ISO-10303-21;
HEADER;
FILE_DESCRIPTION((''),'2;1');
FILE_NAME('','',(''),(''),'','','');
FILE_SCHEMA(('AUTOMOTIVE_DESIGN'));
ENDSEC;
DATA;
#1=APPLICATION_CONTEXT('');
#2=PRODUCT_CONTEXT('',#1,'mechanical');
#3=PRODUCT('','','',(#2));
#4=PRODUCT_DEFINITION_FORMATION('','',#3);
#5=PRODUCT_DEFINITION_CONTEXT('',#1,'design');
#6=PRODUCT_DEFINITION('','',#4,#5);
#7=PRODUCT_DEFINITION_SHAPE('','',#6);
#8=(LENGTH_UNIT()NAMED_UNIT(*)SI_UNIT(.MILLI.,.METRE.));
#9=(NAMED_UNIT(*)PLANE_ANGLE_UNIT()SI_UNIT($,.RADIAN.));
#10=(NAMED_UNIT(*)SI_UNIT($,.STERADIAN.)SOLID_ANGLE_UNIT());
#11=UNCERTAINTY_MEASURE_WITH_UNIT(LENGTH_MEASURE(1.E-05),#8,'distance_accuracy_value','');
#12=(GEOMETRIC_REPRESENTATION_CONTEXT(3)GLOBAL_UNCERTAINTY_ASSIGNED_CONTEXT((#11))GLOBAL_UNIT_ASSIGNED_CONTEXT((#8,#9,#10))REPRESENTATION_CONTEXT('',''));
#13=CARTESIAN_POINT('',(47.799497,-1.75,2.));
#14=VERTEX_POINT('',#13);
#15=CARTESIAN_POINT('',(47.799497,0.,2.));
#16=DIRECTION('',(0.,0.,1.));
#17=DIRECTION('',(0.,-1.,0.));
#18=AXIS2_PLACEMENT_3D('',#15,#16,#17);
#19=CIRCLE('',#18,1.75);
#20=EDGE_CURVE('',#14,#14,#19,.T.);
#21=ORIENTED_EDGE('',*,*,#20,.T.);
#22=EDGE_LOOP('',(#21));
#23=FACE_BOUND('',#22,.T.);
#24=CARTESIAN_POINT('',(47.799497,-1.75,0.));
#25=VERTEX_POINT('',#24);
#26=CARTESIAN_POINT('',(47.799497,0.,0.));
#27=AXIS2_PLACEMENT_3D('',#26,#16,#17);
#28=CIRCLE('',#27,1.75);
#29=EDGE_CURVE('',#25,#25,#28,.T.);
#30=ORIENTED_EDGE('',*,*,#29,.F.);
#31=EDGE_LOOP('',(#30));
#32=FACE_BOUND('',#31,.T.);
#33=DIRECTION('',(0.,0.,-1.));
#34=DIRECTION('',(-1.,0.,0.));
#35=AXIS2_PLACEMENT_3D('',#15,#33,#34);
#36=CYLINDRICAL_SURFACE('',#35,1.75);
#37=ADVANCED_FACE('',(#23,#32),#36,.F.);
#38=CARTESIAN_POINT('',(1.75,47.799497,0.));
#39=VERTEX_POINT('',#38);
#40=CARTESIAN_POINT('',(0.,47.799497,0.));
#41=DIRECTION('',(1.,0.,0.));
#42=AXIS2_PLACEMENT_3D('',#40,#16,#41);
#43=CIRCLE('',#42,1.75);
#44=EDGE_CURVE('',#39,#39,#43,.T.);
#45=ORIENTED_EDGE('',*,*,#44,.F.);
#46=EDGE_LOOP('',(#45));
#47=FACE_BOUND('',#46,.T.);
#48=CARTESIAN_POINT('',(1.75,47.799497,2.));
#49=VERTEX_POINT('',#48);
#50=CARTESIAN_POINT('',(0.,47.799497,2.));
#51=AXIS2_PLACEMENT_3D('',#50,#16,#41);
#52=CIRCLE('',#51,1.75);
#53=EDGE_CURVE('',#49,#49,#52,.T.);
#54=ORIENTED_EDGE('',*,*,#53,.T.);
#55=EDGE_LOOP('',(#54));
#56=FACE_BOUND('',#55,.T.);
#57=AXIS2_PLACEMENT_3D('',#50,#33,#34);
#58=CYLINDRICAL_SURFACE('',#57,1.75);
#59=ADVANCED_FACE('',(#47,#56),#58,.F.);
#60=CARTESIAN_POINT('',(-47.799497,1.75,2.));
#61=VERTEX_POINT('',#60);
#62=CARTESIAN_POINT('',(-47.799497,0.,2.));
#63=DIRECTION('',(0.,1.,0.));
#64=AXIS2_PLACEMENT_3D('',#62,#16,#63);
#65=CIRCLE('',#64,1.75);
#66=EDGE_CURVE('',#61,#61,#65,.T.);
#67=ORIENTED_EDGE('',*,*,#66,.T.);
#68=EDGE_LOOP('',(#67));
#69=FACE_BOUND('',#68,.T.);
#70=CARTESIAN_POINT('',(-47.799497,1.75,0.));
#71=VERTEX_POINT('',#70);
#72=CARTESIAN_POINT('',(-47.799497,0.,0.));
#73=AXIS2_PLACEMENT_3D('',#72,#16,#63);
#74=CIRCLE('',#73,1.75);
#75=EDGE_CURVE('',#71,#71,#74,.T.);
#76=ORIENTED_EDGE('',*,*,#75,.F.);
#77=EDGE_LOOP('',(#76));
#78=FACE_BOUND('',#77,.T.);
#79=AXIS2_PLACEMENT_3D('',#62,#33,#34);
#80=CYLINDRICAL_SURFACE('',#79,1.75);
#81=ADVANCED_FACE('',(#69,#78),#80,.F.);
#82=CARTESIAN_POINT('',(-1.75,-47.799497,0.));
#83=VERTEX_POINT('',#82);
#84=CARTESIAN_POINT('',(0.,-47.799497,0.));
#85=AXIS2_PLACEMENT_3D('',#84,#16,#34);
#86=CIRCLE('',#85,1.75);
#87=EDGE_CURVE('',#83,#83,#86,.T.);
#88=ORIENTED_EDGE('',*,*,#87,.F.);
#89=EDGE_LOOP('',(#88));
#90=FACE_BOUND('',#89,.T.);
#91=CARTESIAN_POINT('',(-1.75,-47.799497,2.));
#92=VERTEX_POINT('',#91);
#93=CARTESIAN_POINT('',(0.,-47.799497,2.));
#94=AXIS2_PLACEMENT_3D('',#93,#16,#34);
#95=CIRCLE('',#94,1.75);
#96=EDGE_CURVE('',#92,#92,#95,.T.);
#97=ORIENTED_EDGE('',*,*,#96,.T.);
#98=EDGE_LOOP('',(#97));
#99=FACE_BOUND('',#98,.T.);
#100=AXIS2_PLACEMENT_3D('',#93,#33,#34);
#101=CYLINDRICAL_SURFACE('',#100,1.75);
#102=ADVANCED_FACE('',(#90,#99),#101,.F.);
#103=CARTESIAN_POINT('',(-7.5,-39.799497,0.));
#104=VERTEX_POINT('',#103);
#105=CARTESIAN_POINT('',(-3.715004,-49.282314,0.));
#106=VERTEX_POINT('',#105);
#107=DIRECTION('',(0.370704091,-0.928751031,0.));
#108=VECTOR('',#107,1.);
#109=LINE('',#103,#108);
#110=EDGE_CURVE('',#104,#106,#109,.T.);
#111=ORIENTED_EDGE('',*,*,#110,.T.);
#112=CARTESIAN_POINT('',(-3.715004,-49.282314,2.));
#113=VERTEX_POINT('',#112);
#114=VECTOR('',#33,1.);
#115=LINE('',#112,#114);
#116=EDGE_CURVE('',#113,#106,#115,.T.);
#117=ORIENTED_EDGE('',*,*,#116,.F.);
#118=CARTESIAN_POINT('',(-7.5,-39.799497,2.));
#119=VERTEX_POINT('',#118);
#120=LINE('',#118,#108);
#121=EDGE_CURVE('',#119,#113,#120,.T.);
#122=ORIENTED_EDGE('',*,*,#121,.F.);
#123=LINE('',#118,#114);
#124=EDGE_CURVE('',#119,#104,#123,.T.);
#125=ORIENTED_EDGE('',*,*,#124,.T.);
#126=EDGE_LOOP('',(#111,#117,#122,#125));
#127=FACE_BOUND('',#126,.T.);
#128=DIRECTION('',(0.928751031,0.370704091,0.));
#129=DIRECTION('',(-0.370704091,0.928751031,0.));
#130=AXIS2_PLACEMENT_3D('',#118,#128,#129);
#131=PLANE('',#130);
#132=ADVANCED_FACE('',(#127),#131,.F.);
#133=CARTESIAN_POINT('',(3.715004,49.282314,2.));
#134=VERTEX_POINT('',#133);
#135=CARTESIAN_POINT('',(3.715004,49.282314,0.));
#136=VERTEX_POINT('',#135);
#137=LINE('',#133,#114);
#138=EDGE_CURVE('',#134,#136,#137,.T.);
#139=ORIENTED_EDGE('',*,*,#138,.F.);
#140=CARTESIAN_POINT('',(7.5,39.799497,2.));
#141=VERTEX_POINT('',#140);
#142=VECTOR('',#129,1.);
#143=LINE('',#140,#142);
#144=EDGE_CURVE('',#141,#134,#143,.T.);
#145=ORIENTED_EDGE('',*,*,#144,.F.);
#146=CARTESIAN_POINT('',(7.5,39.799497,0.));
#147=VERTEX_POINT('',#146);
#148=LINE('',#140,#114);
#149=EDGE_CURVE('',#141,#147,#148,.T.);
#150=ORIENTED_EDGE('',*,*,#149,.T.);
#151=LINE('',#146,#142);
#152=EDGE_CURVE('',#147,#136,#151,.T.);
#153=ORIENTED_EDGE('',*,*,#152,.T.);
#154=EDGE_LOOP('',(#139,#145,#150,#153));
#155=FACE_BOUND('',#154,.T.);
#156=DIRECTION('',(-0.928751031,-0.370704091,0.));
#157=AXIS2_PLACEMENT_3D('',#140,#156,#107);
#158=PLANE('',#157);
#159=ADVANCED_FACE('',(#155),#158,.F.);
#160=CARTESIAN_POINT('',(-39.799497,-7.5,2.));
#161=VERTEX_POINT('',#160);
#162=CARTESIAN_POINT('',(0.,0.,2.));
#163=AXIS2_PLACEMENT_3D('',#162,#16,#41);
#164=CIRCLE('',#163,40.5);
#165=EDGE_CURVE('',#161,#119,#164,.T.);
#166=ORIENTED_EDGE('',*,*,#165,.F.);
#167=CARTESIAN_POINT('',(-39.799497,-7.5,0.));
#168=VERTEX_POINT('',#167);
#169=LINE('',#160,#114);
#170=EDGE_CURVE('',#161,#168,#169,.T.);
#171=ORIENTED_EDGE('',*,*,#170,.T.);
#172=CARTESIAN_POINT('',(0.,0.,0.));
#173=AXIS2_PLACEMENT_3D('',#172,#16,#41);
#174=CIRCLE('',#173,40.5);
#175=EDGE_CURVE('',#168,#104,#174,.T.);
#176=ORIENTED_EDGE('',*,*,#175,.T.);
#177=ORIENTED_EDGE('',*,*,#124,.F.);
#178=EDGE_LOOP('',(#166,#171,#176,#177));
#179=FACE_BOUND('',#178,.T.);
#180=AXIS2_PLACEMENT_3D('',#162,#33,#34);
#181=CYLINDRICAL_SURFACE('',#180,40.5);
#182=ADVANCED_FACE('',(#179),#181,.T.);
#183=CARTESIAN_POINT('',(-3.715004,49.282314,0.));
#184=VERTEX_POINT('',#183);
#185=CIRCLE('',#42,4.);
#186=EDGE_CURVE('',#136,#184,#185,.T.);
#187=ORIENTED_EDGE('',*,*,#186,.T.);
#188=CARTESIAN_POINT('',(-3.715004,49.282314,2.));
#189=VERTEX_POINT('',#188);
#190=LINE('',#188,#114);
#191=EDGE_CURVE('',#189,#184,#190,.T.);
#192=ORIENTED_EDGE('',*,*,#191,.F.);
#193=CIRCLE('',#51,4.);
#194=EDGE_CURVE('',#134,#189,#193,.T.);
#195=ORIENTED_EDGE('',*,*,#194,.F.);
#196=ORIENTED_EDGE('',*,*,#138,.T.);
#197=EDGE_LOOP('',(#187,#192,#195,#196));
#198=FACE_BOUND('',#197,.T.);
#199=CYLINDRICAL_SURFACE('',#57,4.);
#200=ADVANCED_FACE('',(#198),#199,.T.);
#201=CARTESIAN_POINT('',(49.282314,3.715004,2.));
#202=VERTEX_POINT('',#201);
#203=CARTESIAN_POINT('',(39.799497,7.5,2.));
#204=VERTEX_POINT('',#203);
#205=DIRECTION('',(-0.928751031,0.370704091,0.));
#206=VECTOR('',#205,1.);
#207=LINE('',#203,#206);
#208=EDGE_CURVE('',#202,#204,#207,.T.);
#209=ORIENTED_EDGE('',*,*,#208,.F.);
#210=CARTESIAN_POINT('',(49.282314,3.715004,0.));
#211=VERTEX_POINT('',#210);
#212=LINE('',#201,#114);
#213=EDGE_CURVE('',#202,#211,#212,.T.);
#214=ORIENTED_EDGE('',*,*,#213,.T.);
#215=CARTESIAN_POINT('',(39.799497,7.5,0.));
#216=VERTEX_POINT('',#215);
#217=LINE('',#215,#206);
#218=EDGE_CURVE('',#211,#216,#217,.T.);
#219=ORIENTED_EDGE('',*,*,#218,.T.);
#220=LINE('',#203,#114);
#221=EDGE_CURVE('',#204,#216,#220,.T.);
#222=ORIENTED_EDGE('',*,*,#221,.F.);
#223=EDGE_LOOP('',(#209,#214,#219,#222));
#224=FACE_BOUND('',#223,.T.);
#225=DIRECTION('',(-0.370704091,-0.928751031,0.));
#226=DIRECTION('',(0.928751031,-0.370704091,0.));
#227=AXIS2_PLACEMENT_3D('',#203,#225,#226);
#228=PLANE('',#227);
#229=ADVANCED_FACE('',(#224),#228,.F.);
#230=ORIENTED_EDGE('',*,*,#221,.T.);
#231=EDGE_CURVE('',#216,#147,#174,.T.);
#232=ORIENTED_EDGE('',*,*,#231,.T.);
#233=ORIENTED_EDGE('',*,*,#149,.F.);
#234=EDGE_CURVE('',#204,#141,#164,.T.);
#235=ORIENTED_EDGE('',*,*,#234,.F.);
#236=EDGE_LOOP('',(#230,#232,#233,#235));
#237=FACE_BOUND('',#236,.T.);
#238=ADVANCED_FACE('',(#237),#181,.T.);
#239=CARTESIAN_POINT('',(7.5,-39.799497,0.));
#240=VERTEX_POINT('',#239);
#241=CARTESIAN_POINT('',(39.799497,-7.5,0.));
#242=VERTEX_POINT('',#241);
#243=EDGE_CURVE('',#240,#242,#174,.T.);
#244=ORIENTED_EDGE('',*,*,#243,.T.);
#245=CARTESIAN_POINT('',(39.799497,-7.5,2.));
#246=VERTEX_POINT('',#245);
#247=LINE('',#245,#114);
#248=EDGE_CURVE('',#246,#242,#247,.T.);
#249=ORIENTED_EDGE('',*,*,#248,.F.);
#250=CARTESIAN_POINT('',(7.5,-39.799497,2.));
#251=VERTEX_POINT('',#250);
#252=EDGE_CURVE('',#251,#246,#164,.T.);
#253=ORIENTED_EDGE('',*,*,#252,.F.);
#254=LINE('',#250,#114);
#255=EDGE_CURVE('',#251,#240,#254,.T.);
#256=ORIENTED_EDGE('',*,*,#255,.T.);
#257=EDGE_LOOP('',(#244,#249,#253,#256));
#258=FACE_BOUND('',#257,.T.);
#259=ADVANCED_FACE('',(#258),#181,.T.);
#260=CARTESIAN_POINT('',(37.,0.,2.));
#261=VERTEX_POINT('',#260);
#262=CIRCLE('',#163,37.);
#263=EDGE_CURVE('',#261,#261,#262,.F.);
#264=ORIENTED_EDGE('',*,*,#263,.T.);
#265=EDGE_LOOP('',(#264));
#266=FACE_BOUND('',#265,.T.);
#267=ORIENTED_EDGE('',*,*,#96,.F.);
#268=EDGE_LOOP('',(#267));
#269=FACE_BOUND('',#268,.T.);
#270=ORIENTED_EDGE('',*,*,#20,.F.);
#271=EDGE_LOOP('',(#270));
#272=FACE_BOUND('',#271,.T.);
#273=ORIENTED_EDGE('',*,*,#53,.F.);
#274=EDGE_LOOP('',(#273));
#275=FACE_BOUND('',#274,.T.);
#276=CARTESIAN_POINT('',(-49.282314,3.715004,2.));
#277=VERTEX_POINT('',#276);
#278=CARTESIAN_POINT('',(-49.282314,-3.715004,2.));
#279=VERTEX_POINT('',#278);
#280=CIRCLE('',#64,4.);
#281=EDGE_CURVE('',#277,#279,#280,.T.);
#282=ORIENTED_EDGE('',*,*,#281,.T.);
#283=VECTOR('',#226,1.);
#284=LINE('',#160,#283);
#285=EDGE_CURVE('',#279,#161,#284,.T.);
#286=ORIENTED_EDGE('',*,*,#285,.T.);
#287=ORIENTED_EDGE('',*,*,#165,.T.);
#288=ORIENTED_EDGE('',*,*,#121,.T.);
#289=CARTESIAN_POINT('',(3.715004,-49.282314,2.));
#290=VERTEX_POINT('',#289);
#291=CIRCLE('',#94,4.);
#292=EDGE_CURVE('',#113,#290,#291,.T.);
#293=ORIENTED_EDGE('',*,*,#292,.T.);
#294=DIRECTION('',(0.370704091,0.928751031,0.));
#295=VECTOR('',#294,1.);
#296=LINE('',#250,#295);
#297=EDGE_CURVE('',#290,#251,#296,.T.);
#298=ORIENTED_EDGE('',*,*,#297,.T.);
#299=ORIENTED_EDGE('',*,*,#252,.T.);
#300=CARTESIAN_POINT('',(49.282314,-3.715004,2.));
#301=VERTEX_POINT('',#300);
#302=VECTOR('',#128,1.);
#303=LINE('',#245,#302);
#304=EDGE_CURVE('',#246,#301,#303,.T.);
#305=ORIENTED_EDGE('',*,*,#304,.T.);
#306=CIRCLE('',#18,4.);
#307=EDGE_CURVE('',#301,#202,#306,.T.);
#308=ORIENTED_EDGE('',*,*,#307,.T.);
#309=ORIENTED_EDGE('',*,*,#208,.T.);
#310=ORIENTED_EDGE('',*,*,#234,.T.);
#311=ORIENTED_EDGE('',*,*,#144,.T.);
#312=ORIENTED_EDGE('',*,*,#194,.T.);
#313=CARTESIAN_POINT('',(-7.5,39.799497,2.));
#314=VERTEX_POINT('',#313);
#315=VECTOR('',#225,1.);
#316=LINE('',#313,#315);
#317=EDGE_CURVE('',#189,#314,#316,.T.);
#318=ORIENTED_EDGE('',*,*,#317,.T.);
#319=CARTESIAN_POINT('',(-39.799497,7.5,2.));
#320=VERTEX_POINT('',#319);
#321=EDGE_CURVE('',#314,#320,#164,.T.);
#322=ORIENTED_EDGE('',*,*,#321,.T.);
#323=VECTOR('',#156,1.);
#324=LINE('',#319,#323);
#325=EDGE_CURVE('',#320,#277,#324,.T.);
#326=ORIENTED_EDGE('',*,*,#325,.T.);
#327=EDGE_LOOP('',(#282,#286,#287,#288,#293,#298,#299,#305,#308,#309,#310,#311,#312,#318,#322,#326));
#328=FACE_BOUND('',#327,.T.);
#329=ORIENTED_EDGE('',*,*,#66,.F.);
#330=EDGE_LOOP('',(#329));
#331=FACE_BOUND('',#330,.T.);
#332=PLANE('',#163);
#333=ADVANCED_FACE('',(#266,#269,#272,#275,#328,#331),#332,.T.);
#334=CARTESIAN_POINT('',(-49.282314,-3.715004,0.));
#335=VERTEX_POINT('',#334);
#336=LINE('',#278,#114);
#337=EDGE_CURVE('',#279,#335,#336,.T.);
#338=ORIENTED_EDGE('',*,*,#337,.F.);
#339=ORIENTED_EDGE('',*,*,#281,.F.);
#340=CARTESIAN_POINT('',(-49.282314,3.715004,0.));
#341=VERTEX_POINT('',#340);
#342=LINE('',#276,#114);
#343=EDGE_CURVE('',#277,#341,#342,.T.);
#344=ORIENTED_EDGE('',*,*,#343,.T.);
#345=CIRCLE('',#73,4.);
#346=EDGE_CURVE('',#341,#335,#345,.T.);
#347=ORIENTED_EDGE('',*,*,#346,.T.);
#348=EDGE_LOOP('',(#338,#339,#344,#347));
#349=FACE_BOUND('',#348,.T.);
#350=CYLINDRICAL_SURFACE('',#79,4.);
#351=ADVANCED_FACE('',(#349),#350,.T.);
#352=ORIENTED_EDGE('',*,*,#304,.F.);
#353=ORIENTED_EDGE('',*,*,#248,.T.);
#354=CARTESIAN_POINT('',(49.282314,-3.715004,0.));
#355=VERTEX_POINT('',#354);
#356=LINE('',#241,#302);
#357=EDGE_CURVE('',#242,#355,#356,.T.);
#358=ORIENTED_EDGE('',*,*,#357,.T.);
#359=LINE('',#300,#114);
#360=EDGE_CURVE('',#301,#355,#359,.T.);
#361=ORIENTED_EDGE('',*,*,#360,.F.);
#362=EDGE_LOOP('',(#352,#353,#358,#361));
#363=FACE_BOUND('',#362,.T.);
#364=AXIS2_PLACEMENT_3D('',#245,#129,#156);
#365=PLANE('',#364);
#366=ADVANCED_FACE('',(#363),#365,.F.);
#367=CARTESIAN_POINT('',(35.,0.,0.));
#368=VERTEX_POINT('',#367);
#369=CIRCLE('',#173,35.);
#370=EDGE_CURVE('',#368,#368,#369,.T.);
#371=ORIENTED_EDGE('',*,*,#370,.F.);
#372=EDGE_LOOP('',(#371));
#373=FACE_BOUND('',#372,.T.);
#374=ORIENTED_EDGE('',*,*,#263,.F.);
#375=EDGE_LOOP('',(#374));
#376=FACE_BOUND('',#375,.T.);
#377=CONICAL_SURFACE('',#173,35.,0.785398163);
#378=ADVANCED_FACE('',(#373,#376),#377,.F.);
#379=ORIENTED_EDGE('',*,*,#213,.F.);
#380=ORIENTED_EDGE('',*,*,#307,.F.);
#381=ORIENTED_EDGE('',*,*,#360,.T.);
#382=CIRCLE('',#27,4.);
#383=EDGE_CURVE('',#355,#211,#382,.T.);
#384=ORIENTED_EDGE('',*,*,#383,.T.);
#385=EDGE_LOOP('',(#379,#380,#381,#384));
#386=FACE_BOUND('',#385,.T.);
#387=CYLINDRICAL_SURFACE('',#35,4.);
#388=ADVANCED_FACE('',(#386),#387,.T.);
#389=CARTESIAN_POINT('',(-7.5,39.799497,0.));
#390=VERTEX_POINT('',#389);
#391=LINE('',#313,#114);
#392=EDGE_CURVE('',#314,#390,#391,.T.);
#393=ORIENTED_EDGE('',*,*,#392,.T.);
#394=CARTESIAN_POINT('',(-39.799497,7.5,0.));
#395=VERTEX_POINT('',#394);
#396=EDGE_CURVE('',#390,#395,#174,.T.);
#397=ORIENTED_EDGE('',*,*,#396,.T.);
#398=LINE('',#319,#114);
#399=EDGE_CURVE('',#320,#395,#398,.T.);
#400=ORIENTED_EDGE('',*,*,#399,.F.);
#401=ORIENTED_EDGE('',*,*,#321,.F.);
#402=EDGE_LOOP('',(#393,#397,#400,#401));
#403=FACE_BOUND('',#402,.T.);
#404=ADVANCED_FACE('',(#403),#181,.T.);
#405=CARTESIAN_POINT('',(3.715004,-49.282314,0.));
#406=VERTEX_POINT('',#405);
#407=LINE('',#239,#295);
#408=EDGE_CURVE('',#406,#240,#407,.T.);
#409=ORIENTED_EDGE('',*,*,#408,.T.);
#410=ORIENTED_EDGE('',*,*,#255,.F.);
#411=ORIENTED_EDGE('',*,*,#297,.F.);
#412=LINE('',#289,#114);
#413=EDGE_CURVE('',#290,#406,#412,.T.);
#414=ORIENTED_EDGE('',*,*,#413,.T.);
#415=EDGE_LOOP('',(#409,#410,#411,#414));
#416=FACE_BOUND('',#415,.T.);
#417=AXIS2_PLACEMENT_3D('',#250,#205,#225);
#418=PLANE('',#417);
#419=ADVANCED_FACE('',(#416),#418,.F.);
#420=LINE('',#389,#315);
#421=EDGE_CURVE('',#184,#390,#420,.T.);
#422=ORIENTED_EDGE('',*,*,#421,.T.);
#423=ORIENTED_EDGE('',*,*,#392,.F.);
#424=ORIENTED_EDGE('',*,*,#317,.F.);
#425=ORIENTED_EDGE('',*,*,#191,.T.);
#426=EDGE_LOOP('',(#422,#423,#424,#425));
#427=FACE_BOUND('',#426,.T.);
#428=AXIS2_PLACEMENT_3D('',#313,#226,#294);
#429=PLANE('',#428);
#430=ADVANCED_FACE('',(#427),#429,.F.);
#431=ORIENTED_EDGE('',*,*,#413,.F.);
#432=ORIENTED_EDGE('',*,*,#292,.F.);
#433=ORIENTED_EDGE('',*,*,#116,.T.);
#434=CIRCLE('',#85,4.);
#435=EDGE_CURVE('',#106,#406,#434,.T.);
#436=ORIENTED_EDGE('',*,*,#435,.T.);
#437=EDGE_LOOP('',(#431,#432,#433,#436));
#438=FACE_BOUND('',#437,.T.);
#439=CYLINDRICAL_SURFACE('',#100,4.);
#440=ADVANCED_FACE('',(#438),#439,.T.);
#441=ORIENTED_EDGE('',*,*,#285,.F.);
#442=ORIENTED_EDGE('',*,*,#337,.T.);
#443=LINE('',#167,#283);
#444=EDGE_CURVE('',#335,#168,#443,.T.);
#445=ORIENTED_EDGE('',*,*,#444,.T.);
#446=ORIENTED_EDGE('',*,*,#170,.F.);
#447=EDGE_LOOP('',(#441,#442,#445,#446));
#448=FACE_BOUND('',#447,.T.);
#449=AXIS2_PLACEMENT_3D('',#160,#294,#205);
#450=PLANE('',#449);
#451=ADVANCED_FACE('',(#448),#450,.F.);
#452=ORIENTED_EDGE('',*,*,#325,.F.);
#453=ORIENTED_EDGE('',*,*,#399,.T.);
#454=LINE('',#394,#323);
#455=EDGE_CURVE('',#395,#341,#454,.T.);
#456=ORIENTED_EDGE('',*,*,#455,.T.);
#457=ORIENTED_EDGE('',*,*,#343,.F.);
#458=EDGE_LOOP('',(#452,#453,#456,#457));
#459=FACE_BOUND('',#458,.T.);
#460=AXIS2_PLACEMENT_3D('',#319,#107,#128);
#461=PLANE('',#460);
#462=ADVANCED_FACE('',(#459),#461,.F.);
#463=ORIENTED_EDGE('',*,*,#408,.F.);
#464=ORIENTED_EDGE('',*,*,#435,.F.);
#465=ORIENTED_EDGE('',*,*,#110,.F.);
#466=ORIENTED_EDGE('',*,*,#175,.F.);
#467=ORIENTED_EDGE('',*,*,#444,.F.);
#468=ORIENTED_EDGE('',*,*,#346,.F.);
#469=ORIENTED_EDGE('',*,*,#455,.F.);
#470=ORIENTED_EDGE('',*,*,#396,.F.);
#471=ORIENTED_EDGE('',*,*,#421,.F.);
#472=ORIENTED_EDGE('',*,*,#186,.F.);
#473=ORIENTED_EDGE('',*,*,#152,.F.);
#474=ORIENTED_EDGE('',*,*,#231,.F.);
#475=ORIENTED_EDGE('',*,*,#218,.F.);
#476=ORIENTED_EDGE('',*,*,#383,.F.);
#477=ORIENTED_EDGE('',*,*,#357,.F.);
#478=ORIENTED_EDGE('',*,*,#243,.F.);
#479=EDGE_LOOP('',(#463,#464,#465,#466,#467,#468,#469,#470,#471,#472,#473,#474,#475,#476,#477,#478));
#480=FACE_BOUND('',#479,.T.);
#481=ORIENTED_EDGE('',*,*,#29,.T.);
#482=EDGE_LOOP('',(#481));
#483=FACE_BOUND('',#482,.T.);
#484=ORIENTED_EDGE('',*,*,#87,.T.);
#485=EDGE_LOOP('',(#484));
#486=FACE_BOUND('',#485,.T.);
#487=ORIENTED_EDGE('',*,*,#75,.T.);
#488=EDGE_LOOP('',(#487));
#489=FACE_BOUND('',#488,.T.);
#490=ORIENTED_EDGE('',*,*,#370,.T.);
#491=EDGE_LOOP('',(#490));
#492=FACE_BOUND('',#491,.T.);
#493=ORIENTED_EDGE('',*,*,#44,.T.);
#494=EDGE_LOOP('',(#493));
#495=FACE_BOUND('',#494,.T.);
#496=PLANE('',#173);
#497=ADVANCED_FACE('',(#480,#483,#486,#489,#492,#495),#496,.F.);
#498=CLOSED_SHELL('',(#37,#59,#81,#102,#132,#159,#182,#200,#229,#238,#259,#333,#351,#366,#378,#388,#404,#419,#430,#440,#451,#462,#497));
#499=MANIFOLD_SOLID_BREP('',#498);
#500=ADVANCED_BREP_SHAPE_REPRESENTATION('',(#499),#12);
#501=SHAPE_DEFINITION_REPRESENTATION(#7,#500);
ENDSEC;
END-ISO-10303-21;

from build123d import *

# Parameters (mm, degrees)
SKETCH1_R           = 40.5
SKETCH1_R_2         = 35
BOSS_EXTRUDE1_DEPTH = 2
SKETCH2_R           = 1.75
BOSS_EXTRUDE2_DEPTH = 2
CIRPATTERN1_COUNT   = 4
CHAMFER1_SIZE       = 2


with BuildPart() as part:
    # Sketch1 → Boss-Extrude1 (new body)
    with BuildSketch(Plane.XY):
        Circle(SKETCH1_R)
        Circle(SKETCH1_R_2, mode=Mode.SUBTRACT)
    extrude(amount=BOSS_EXTRUDE1_DEPTH)

    # Sketch2 → Boss-Extrude2 (add)
    with BuildSketch(Plane.XY):
        with BuildLine():
            Line((7.5, 39.799497484), (3.715004122, 49.282313849))
            ThreePointArc((3.715004122, 49.282313849), (0, 51.799497484), (-3.715004122, 49.282313849))
            Line((-3.715004122, 49.282313849), (-7.5, 39.799497484))
            ThreePointArc((-7.5, 39.799497484), (0, 40.5), (7.5, 39.799497484))
        make_face()
        with Locations((0, 47.799497484)):
            Circle(SKETCH2_R, mode=Mode.SUBTRACT)
    boss_extrude2 = extrude(amount=BOSS_EXTRUDE2_DEPTH)

    # CirPattern1: Boss-Extrude2 ×4 about axis
    cirpattern1_axis = Axis((0, 0, 0), (0, 0, 1))
    for i in range(1, CIRPATTERN1_COUNT):
        add(boss_extrude2.rotate(cirpattern1_axis, i * 360 / CIRPATTERN1_COUNT))

    # Chamfer1
    chamfer1_edges = [part.edges().sort_by_distance(p)[0] for p in [
        (-35, 0, 2),
    ]]
    chamfer(chamfer1_edges, length=CHAMFER1_SIZE - 0.0001)  # a hair under: the kernel refuses the full size


solid = part.part
